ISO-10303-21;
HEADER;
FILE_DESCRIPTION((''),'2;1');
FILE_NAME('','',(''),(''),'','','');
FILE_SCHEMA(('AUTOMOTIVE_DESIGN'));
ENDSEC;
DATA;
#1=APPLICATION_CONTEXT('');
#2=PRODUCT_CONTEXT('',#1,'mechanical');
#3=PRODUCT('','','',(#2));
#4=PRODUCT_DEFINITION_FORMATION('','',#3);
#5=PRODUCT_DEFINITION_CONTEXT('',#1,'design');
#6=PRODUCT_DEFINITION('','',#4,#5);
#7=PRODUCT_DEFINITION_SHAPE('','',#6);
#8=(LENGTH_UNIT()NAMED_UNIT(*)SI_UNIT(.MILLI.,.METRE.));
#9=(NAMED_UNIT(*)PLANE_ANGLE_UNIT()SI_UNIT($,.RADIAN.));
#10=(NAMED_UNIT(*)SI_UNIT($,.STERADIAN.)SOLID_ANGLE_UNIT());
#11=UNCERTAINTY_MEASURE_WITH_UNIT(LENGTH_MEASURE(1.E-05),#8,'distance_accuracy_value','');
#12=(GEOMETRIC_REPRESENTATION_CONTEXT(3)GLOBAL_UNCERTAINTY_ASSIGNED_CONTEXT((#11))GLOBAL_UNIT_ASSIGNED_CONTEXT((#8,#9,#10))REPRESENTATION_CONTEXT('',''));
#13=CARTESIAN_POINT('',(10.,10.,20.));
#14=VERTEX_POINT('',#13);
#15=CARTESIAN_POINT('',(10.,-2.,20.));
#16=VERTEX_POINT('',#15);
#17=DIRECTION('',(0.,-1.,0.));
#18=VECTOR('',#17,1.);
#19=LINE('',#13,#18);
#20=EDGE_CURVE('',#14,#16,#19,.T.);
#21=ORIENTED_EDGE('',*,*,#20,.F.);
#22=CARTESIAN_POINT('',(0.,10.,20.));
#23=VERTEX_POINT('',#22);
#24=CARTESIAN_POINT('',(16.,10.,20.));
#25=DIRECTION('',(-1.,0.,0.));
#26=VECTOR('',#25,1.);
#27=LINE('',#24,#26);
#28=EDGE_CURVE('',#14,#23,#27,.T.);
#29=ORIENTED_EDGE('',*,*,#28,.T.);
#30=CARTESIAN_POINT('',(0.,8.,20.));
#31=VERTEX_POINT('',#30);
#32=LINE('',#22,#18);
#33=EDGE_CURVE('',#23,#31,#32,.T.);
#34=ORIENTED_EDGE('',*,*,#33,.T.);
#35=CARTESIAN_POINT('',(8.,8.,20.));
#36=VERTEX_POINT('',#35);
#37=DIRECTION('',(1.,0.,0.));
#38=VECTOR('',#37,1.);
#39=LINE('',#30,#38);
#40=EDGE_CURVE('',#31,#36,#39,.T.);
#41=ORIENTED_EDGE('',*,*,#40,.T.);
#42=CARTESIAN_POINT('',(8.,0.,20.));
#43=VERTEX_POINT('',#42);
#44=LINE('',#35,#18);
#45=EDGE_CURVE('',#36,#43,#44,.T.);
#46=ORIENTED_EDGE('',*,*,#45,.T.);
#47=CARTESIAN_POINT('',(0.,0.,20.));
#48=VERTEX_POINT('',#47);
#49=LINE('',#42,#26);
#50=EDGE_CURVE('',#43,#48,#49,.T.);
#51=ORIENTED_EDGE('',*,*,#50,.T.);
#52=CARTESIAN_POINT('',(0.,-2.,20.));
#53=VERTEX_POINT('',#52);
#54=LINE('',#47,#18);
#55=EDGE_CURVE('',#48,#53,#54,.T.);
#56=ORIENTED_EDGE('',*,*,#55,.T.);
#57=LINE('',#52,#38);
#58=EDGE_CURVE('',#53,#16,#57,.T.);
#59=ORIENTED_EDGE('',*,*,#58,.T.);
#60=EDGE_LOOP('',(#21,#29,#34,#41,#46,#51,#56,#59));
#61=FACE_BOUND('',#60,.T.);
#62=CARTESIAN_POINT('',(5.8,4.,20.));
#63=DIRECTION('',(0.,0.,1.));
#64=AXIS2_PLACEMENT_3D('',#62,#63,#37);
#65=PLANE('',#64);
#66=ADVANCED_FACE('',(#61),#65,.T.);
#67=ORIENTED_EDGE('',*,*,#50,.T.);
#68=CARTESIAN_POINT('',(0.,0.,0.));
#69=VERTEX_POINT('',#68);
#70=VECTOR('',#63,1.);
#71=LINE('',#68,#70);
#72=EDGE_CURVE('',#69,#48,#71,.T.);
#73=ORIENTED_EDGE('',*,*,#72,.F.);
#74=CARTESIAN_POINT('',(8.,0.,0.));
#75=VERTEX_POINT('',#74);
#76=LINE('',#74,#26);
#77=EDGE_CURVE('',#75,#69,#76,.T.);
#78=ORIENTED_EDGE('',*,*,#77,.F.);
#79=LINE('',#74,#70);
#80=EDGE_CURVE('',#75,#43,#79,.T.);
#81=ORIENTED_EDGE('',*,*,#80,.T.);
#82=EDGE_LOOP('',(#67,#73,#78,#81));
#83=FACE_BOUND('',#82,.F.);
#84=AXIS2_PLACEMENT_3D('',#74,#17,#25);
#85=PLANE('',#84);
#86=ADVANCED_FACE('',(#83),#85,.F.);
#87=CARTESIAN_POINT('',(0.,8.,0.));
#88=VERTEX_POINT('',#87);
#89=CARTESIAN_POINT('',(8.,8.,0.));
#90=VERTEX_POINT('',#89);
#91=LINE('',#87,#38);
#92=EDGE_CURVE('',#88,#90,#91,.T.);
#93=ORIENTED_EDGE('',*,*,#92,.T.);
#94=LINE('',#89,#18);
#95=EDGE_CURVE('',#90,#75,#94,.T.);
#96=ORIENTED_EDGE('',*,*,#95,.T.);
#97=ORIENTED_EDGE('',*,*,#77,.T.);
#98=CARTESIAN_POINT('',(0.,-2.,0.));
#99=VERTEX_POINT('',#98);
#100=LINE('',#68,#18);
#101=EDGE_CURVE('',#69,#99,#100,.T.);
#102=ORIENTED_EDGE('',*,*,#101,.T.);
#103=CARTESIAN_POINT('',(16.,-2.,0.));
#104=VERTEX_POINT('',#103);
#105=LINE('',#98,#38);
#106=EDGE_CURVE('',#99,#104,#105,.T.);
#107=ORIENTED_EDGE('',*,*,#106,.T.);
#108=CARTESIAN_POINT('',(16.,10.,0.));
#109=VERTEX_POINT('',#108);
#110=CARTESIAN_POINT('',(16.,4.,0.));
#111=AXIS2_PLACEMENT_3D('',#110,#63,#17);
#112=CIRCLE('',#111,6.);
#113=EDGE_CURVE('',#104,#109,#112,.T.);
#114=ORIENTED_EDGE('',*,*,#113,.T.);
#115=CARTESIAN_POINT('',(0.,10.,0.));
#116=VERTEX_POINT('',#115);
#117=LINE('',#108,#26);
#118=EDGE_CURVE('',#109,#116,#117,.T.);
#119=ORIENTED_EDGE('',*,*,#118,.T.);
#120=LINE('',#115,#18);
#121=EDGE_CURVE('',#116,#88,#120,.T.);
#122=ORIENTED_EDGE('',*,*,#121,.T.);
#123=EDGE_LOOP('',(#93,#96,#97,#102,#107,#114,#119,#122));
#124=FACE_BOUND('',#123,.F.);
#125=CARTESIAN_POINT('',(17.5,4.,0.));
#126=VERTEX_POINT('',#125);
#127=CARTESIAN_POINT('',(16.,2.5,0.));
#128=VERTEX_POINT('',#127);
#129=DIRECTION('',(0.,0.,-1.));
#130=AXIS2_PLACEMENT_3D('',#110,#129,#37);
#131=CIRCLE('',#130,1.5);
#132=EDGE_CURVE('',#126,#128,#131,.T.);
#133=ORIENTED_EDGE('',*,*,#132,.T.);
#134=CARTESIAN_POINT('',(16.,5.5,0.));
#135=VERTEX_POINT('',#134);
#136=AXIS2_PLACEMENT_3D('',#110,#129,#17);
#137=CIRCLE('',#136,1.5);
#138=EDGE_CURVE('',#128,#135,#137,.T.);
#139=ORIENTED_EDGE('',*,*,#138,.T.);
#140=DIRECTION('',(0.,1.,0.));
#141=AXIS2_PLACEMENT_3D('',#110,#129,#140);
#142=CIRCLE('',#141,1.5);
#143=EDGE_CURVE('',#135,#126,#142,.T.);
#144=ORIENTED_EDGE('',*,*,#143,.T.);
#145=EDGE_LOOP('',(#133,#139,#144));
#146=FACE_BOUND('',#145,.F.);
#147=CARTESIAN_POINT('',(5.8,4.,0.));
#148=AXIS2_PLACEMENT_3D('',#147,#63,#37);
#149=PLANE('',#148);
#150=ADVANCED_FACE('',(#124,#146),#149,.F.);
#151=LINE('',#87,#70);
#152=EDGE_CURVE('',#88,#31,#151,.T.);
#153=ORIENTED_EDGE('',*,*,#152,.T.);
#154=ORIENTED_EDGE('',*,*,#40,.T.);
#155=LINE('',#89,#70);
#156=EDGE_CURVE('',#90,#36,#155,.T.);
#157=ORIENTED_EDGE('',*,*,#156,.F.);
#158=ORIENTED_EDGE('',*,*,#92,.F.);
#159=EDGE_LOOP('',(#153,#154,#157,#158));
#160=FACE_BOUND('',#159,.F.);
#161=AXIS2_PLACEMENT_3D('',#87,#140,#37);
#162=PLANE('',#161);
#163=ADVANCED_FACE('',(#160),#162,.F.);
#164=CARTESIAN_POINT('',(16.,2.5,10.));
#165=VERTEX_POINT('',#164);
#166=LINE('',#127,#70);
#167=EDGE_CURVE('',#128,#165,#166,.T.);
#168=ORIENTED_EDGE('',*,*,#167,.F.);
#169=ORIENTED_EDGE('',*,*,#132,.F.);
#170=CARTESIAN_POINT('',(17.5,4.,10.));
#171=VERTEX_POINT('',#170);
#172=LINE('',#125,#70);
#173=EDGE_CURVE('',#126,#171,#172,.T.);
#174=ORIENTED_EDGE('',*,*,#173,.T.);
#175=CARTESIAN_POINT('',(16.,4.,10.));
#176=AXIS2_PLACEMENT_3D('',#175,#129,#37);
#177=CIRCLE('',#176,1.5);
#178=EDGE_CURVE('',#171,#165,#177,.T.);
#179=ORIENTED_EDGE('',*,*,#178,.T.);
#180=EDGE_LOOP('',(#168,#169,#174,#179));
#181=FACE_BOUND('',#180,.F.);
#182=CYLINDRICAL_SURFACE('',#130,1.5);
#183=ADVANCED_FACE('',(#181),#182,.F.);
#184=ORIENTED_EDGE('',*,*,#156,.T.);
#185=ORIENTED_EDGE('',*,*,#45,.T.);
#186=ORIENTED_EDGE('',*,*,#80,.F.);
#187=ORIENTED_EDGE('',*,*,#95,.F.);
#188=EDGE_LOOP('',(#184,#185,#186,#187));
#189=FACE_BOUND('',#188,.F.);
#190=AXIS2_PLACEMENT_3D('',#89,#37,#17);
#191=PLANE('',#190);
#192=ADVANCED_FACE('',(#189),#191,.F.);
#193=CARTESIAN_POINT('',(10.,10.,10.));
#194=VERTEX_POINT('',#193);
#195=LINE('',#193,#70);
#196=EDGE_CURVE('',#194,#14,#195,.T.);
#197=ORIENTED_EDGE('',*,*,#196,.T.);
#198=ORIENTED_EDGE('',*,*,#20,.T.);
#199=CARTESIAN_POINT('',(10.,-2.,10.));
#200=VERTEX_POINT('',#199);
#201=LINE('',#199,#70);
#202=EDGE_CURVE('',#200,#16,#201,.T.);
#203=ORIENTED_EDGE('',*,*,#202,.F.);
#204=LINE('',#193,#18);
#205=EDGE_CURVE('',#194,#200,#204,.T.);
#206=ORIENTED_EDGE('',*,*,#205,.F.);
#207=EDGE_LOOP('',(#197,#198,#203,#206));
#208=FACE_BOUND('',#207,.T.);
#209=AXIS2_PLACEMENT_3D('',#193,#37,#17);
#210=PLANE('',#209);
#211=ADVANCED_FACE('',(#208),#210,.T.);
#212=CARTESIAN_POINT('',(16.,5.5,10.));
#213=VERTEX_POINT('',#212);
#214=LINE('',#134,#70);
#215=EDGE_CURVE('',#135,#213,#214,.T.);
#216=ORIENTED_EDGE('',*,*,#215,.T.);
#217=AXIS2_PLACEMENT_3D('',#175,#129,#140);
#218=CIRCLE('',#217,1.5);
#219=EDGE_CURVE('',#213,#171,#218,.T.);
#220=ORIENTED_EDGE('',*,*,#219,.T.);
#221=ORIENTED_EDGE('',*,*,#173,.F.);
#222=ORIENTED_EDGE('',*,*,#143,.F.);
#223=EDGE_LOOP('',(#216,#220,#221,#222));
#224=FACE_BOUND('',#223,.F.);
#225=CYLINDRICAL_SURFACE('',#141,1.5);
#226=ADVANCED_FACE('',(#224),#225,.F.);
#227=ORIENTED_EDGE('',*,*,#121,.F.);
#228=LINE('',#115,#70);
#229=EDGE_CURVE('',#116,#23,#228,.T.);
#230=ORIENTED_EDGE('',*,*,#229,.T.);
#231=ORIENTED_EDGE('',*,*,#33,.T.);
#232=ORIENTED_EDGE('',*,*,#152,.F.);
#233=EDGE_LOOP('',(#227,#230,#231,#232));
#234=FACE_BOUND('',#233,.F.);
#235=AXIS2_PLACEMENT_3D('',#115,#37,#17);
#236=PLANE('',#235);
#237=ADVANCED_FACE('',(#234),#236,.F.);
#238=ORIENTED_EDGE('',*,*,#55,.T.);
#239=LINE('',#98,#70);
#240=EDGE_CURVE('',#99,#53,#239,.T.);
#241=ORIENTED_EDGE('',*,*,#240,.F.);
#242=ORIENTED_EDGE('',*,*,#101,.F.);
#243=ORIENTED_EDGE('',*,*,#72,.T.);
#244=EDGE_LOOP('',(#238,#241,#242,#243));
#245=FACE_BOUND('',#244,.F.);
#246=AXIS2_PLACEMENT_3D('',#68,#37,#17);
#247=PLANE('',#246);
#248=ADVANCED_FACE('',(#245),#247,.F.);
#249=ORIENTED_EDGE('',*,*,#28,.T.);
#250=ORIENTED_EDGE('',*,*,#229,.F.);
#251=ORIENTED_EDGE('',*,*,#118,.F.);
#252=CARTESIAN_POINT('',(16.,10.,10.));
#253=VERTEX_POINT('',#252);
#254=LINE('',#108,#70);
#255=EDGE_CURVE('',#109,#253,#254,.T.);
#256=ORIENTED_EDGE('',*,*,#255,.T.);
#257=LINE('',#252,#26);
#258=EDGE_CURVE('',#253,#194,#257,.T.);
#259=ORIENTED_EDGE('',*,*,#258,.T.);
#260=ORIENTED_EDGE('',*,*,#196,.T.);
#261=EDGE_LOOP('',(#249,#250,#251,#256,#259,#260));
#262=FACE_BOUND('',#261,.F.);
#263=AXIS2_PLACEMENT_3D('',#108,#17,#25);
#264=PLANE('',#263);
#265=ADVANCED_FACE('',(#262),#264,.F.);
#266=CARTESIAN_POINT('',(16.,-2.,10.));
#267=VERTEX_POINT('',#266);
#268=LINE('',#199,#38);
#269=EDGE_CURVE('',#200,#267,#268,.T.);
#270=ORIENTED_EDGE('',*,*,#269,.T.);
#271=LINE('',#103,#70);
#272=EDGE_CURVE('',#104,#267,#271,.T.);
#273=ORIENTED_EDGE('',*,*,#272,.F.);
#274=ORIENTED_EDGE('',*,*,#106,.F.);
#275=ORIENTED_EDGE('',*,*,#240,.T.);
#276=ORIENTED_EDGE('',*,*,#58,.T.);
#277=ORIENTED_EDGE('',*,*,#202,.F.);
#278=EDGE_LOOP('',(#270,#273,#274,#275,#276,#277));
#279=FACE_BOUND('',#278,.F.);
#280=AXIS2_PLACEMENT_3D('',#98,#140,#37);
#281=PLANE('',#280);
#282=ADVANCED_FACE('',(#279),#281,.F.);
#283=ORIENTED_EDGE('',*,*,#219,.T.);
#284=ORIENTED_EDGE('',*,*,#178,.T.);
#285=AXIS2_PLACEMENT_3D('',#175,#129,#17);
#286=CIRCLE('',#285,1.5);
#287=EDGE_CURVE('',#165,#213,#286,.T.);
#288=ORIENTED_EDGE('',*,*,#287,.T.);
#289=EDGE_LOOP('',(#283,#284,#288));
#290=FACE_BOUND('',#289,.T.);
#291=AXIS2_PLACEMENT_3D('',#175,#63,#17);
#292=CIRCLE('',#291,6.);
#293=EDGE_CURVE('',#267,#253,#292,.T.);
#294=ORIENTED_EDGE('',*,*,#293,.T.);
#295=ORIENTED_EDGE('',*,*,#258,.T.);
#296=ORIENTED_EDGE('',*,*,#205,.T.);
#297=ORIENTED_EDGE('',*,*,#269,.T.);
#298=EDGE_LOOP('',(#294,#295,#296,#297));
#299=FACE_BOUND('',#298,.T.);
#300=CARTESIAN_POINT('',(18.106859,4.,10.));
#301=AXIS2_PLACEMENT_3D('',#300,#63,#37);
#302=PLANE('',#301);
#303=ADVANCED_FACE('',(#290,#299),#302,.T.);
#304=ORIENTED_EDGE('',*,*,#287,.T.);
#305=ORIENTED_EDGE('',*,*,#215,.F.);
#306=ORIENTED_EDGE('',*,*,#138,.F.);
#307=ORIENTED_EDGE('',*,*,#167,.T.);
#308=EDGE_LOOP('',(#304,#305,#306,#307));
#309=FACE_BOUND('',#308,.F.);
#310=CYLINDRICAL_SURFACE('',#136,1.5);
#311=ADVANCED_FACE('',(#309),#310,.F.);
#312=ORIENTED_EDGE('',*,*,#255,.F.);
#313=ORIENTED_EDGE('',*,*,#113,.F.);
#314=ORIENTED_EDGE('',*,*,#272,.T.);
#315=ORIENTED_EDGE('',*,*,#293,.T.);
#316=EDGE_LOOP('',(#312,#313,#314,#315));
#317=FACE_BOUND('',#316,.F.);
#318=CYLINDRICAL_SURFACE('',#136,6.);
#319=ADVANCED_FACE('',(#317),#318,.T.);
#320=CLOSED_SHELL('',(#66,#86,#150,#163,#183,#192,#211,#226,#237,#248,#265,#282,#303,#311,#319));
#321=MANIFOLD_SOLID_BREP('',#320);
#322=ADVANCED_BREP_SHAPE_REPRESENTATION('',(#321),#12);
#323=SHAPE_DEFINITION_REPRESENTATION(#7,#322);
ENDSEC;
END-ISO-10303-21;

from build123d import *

# Parameters (mm, degrees)
F1_DEPTH  = 20
F2_START  = 10
F1_FACE_R = 1.5
F2_DEPTH  = 10


# Not quite as in the source:
# - a feature names something its author has since deleted; it is built from what else it names


with BuildPart() as f1:
    # F0 (on Top) → F1 (new body)
    with BuildSketch(Plane.XY):
        Polygon((8, 0), (0, 0), (0, -2), (10, -2), (10, 4), (10, 10), (0, 10), (0, 8), (8, 8), align=None)
        with BuildLine():
            Line((16, 2.5), (16, -2))
            ThreePointArc((16, -2), (22, 4), (16, 10))
            Line((16, 10), (16, 5.5))
            ThreePointArc((16, 5.5), (17.0606601718, 5.0606601718), (17.5, 4))
            ThreePointArc((17.5, 4), (17.0606601718, 2.9393398282), (16, 2.5))
        make_face()
        with BuildLine():
            ThreePointArc((10, 4), (11.7573593129, -0.2426406871), (16, -2))
            Line((16, -2), (16, 2.5))
            ThreePointArc((16, 2.5), (14.5, 4), (16, 5.5))
            Line((16, 5.5), (16, 10))
            ThreePointArc((16, 10), (11.7573593129, 8.2426406871), (10, 4))
        make_face()
        with BuildLine():
            Line((16, 10), (10, 10))
            Line((10, 10), (10, 4))
            ThreePointArc((10, 4), (11.7573593129, 8.2426406871), (16, 10))
        make_face()
        with BuildLine():
            Line((10, 4), (10, -2))
            Line((10, -2), (16, -2))
            ThreePointArc((16, -2), (11.7573593129, -0.2426406871), (10, 4))
        make_face()
    extrude(amount=F1_DEPTH)

    # F0 (on Top) + F1_face (on face) → F2 (cut)
    with BuildSketch(Plane.XY.offset(F2_START)):
        with BuildLine():
            Line((16, 2.5), (16, -2))
            ThreePointArc((16, -2), (22, 4), (16, 10))
            Line((16, 10), (16, 5.5))
            ThreePointArc((16, 5.5), (17.0606601718, 5.0606601718), (17.5, 4))
            ThreePointArc((17.5, 4), (17.0606601718, 2.9393398282), (16, 2.5))
        make_face()
        with BuildLine():
            ThreePointArc((10, 4), (11.7573593129, -0.2426406871), (16, -2))
            Line((16, -2), (16, 2.5))
            ThreePointArc((16, 2.5), (14.5, 4), (16, 5.5))
            Line((16, 5.5), (16, 10))
            ThreePointArc((16, 10), (11.7573593129, 8.2426406871), (10, 4))
        make_face()
        with BuildLine():
            Line((10, 4), (10, -2))
            Line((10, -2), (16, -2))
            ThreePointArc((16, -2), (11.7573593129, -0.2426406871), (10, 4))
        make_face()
        with BuildLine():
            Line((16, 10), (10, 10))
            Line((10, 10), (10, 4))
            ThreePointArc((10, 4), (11.7573593129, 8.2426406871), (16, 10))
        make_face()
    with BuildSketch(Plane(origin=(12.4841125556, 4, 20), x_dir=(1, 0, 0), z_dir=(0, 0, 1)).offset(F2_START)):
        with BuildLine():
            Line((-4.4841125556, -4), (-12.4841125556, -4))
            Line((-12.4841125556, -4), (-12.4841125556, -6))
            Line((-12.4841125556, -6), (3.5158874444, -6))
            ThreePointArc((3.5158874444, -6), (9.5158874444, 0), (3.5158874444, 6))
            Line((3.5158874444, 6), (-12.4841125556, 6))
            Line((-12.4841125556, 6), (-12.4841125556, 4))
            Line((-12.4841125556, 4), (-4.4841125556, 4))
            Line((-4.4841125556, 4), (-4.4841125556, -4))
        make_face()
        with Locations((3.5158874444, 0)):
            Circle(F1_FACE_R, mode=Mode.SUBTRACT)
    extrude(amount=F2_DEPTH, mode=Mode.SUBTRACT)


solid = f1.part
